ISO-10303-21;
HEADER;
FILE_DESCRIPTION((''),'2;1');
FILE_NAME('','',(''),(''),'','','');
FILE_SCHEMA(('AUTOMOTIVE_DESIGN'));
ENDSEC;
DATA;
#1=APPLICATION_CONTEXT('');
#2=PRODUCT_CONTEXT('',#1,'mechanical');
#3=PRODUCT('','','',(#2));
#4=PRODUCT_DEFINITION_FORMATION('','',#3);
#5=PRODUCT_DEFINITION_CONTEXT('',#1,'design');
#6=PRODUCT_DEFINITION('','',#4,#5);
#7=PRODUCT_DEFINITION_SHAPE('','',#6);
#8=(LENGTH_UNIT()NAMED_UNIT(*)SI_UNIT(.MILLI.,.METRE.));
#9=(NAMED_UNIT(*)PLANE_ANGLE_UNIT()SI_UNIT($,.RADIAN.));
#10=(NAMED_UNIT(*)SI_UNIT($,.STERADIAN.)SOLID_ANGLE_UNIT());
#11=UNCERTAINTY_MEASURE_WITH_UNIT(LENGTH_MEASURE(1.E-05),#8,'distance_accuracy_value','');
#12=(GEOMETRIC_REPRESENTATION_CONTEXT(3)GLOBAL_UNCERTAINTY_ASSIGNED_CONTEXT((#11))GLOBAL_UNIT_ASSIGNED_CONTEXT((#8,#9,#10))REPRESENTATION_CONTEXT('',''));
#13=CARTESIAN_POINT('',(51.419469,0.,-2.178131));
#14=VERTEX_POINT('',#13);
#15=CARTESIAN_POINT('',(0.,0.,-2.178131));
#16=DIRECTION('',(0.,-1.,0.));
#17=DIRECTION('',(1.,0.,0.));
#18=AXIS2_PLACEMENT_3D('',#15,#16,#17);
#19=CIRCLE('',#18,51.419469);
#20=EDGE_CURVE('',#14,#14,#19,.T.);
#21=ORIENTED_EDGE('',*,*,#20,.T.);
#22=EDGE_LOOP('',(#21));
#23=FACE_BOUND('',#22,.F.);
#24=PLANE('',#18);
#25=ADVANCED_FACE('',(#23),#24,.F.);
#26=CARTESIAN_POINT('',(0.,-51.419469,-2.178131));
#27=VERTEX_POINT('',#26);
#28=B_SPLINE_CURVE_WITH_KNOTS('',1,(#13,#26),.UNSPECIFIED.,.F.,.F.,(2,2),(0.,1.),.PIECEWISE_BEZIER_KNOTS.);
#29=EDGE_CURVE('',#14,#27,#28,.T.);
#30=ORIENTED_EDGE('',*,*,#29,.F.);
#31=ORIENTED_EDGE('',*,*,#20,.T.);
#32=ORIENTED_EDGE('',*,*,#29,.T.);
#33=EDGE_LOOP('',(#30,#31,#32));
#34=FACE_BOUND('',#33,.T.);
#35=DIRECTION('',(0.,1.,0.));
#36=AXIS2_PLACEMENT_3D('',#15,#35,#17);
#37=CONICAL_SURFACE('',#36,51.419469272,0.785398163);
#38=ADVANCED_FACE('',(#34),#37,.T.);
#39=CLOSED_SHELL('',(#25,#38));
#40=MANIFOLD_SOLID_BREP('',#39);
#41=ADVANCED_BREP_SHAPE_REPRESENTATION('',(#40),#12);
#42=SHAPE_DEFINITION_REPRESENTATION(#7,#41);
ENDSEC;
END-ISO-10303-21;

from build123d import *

# Parameters (mm, degrees)
F0_R = 51.4194692716


# Not quite as in the source:
# - an extrude whose draft closes it to a point is written as a loft to that point


with BuildPart() as f1:
    # F0 (on Front) → F1 section 0
    with BuildSketch(Plane.XZ, mode=Mode.PRIVATE) as f1_s0:
        with Locations((0, -2.1781306714)):
            Circle(F0_R)
    loft([f1_s0.sketch, Vertex(0, -51.4194692716, -2.1781306714)], ruled=True)


solid = f1.part
